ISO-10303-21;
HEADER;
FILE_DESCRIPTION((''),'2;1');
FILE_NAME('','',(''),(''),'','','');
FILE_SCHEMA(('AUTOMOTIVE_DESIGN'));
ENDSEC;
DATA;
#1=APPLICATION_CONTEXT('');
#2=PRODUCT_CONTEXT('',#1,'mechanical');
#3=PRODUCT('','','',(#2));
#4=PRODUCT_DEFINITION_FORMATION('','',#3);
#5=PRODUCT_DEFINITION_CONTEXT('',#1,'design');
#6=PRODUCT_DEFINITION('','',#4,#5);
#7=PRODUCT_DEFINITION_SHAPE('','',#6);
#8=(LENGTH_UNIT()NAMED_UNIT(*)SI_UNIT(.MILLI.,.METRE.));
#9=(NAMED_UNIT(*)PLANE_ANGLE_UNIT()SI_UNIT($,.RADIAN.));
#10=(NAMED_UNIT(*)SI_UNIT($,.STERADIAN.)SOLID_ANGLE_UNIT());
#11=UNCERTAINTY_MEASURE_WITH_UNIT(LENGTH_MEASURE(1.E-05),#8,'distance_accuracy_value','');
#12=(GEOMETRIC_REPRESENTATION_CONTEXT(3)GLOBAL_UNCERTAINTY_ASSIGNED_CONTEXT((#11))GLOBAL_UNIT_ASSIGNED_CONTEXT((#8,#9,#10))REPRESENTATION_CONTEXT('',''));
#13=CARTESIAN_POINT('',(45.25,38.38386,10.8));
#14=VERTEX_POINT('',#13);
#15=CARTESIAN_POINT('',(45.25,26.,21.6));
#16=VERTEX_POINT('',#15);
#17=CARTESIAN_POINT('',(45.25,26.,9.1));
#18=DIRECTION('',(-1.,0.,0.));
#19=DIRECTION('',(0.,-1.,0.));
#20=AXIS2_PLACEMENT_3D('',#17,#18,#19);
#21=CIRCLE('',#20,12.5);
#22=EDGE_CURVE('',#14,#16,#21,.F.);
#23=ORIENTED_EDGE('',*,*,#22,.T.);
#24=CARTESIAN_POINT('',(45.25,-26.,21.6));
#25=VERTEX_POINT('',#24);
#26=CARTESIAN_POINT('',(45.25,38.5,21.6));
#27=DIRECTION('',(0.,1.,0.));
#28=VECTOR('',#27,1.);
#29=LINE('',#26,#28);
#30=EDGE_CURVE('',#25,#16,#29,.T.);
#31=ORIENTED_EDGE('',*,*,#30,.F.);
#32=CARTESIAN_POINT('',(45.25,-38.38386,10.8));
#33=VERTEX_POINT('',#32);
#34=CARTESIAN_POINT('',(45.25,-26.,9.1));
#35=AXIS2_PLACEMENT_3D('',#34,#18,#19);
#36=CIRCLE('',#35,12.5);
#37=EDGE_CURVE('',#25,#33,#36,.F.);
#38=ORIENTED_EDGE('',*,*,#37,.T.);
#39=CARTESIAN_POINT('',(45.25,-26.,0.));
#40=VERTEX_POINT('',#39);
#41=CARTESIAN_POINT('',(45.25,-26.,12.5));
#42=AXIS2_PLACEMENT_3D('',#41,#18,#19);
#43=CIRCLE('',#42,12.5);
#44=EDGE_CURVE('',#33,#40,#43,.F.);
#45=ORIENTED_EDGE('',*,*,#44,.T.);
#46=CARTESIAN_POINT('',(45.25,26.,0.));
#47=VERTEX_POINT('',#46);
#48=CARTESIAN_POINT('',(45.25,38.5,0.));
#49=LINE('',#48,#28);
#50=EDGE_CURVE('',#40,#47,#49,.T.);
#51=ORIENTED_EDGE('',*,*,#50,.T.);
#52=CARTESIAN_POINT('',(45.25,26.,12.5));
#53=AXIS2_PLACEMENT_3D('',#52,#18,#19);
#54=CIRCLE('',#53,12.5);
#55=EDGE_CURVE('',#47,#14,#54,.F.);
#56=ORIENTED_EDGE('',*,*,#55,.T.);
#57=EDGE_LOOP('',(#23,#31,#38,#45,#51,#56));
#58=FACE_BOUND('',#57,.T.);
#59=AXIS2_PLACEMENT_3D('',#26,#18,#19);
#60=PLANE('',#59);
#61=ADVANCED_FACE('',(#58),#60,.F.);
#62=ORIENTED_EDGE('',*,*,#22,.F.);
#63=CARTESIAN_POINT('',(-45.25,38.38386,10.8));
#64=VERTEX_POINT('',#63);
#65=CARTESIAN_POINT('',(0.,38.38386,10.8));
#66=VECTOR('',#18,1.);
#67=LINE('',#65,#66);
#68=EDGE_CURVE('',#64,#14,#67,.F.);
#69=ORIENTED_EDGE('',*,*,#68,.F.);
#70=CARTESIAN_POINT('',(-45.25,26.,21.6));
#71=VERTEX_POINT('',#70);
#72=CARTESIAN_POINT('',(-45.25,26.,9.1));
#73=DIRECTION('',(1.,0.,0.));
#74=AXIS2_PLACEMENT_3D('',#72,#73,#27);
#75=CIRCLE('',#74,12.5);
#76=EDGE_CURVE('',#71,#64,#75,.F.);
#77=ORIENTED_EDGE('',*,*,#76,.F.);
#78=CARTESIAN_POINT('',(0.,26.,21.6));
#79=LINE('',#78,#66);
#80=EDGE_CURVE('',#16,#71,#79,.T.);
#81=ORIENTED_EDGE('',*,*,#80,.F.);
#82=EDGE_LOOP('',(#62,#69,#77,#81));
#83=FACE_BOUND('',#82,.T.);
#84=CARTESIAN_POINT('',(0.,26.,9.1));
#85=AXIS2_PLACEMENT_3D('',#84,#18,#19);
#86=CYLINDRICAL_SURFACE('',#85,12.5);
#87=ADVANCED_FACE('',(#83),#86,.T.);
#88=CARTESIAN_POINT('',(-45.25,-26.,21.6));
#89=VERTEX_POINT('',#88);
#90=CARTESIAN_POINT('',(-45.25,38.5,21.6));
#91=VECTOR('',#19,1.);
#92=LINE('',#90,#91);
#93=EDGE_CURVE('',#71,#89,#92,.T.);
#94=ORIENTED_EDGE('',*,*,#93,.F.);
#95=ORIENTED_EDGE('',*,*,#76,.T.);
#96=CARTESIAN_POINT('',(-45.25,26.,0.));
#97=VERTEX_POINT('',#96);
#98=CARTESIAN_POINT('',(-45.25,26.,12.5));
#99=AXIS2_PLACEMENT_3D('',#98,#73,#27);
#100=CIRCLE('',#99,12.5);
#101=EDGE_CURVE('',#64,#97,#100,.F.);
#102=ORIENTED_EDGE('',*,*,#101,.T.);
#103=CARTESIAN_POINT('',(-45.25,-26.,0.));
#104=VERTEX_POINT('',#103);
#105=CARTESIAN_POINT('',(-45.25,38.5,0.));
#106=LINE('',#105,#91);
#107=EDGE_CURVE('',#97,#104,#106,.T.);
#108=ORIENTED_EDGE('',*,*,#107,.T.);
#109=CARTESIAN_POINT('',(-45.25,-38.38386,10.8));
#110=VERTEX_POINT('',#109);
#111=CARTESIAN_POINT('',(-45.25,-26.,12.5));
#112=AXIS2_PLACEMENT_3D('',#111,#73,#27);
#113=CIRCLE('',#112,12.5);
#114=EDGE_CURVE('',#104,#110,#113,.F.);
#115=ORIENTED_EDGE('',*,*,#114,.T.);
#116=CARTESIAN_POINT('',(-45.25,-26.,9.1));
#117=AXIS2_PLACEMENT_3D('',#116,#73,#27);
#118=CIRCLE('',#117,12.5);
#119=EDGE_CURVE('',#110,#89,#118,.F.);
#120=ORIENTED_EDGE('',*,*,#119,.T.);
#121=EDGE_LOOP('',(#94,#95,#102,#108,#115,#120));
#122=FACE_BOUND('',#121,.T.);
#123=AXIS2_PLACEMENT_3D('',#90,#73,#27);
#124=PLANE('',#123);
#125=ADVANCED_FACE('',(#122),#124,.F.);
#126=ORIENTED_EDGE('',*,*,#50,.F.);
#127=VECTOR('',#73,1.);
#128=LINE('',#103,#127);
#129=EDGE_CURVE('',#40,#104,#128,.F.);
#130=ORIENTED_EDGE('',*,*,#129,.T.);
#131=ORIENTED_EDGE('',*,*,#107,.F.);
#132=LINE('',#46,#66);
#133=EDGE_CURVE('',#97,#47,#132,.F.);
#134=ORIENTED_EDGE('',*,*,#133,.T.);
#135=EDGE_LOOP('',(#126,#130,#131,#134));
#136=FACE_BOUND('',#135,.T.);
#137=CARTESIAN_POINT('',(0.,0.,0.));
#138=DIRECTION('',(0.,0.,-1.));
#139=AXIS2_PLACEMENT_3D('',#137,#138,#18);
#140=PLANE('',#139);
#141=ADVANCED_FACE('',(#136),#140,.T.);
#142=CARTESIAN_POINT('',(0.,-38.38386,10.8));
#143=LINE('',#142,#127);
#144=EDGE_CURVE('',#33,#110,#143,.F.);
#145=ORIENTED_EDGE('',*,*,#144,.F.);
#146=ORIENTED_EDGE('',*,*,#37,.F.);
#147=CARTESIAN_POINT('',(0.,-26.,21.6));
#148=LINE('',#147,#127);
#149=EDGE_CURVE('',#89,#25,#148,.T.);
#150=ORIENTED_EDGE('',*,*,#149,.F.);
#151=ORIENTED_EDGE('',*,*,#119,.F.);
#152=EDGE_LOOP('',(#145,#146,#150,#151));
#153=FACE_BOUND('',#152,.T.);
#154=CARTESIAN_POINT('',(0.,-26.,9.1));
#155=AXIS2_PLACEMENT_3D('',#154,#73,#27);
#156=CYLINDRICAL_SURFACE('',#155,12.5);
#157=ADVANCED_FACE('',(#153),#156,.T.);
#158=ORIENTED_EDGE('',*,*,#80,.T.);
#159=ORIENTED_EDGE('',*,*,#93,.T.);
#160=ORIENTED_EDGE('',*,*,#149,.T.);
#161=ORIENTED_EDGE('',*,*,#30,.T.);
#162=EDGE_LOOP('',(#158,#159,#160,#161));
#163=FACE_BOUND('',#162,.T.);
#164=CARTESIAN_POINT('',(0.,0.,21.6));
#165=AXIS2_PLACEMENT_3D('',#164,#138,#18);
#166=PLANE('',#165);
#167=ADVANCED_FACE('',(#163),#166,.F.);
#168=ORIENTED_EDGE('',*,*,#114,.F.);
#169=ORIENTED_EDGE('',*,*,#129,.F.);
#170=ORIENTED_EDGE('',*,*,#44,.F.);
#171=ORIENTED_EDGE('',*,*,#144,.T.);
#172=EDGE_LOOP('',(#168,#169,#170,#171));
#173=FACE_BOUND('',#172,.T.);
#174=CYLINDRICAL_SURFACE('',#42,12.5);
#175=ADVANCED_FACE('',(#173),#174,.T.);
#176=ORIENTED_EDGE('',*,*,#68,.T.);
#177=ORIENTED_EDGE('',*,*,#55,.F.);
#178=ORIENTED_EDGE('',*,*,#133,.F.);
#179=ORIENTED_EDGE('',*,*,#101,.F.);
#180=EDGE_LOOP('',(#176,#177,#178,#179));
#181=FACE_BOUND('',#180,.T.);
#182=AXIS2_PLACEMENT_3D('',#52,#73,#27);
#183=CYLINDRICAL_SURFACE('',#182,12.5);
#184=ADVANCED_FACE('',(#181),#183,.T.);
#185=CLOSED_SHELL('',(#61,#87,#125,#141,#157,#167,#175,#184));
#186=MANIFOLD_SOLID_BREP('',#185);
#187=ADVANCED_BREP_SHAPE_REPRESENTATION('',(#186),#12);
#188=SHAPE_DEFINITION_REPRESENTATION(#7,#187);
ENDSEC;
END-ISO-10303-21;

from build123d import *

# Parameters (mm, degrees)
SKETCH_1_W      = 90.5
SKETCH_1_H      = 77
EXTRUDE_1_DEPTH = 21.6
FILLET_1_R      = 12.5


with BuildPart() as part:
    # 草圖1 → 填料-伸長1 (new body)
    with BuildSketch(Plane.XY):
        Rectangle(SKETCH_1_W, SKETCH_1_H)
    extrude(amount=EXTRUDE_1_DEPTH)

    # 圓角1
    # the kernel refuses this fillet: 12.5 mm, written as the material it takes off along each edge
    with BuildSketch(Plane(origin=(-76.5, -38.5, 0), x_dir=(0, 0, 1), z_dir=(1, 0, 0)), Plane(origin=(76.5, 38.5, 0), x_dir=(0, 0, 1), z_dir=(-1, 0, 0))) as fillet_1_piece_1:
        with BuildLine():
            CenterArc((FILLET_1_R, -FILLET_1_R), FILLET_1_R, 90, 90)
            Line((0, -FILLET_1_R), (0, 0))
            Line((0, 0), (FILLET_1_R, 0))
        make_face()
    extrude(amount=153, mode=Mode.SUBTRACT)
    with BuildSketch(Plane(origin=(-76.5, -38.5, 21.6), x_dir=(0, 0, -1), z_dir=(1, 0, 0)), Plane(origin=(76.5, 38.5, 21.6), x_dir=(0, 0, -1), z_dir=(-1, 0, 0))) as fillet_1_piece_2:
        with BuildLine():
            CenterArc((FILLET_1_R, FILLET_1_R), FILLET_1_R, 180, 90)
            Line((0, FILLET_1_R), (0, 0))
            Line((0, 0), (FILLET_1_R, 0))
        make_face()
    extrude(amount=153, mode=Mode.SUBTRACT)


solid = part.part
